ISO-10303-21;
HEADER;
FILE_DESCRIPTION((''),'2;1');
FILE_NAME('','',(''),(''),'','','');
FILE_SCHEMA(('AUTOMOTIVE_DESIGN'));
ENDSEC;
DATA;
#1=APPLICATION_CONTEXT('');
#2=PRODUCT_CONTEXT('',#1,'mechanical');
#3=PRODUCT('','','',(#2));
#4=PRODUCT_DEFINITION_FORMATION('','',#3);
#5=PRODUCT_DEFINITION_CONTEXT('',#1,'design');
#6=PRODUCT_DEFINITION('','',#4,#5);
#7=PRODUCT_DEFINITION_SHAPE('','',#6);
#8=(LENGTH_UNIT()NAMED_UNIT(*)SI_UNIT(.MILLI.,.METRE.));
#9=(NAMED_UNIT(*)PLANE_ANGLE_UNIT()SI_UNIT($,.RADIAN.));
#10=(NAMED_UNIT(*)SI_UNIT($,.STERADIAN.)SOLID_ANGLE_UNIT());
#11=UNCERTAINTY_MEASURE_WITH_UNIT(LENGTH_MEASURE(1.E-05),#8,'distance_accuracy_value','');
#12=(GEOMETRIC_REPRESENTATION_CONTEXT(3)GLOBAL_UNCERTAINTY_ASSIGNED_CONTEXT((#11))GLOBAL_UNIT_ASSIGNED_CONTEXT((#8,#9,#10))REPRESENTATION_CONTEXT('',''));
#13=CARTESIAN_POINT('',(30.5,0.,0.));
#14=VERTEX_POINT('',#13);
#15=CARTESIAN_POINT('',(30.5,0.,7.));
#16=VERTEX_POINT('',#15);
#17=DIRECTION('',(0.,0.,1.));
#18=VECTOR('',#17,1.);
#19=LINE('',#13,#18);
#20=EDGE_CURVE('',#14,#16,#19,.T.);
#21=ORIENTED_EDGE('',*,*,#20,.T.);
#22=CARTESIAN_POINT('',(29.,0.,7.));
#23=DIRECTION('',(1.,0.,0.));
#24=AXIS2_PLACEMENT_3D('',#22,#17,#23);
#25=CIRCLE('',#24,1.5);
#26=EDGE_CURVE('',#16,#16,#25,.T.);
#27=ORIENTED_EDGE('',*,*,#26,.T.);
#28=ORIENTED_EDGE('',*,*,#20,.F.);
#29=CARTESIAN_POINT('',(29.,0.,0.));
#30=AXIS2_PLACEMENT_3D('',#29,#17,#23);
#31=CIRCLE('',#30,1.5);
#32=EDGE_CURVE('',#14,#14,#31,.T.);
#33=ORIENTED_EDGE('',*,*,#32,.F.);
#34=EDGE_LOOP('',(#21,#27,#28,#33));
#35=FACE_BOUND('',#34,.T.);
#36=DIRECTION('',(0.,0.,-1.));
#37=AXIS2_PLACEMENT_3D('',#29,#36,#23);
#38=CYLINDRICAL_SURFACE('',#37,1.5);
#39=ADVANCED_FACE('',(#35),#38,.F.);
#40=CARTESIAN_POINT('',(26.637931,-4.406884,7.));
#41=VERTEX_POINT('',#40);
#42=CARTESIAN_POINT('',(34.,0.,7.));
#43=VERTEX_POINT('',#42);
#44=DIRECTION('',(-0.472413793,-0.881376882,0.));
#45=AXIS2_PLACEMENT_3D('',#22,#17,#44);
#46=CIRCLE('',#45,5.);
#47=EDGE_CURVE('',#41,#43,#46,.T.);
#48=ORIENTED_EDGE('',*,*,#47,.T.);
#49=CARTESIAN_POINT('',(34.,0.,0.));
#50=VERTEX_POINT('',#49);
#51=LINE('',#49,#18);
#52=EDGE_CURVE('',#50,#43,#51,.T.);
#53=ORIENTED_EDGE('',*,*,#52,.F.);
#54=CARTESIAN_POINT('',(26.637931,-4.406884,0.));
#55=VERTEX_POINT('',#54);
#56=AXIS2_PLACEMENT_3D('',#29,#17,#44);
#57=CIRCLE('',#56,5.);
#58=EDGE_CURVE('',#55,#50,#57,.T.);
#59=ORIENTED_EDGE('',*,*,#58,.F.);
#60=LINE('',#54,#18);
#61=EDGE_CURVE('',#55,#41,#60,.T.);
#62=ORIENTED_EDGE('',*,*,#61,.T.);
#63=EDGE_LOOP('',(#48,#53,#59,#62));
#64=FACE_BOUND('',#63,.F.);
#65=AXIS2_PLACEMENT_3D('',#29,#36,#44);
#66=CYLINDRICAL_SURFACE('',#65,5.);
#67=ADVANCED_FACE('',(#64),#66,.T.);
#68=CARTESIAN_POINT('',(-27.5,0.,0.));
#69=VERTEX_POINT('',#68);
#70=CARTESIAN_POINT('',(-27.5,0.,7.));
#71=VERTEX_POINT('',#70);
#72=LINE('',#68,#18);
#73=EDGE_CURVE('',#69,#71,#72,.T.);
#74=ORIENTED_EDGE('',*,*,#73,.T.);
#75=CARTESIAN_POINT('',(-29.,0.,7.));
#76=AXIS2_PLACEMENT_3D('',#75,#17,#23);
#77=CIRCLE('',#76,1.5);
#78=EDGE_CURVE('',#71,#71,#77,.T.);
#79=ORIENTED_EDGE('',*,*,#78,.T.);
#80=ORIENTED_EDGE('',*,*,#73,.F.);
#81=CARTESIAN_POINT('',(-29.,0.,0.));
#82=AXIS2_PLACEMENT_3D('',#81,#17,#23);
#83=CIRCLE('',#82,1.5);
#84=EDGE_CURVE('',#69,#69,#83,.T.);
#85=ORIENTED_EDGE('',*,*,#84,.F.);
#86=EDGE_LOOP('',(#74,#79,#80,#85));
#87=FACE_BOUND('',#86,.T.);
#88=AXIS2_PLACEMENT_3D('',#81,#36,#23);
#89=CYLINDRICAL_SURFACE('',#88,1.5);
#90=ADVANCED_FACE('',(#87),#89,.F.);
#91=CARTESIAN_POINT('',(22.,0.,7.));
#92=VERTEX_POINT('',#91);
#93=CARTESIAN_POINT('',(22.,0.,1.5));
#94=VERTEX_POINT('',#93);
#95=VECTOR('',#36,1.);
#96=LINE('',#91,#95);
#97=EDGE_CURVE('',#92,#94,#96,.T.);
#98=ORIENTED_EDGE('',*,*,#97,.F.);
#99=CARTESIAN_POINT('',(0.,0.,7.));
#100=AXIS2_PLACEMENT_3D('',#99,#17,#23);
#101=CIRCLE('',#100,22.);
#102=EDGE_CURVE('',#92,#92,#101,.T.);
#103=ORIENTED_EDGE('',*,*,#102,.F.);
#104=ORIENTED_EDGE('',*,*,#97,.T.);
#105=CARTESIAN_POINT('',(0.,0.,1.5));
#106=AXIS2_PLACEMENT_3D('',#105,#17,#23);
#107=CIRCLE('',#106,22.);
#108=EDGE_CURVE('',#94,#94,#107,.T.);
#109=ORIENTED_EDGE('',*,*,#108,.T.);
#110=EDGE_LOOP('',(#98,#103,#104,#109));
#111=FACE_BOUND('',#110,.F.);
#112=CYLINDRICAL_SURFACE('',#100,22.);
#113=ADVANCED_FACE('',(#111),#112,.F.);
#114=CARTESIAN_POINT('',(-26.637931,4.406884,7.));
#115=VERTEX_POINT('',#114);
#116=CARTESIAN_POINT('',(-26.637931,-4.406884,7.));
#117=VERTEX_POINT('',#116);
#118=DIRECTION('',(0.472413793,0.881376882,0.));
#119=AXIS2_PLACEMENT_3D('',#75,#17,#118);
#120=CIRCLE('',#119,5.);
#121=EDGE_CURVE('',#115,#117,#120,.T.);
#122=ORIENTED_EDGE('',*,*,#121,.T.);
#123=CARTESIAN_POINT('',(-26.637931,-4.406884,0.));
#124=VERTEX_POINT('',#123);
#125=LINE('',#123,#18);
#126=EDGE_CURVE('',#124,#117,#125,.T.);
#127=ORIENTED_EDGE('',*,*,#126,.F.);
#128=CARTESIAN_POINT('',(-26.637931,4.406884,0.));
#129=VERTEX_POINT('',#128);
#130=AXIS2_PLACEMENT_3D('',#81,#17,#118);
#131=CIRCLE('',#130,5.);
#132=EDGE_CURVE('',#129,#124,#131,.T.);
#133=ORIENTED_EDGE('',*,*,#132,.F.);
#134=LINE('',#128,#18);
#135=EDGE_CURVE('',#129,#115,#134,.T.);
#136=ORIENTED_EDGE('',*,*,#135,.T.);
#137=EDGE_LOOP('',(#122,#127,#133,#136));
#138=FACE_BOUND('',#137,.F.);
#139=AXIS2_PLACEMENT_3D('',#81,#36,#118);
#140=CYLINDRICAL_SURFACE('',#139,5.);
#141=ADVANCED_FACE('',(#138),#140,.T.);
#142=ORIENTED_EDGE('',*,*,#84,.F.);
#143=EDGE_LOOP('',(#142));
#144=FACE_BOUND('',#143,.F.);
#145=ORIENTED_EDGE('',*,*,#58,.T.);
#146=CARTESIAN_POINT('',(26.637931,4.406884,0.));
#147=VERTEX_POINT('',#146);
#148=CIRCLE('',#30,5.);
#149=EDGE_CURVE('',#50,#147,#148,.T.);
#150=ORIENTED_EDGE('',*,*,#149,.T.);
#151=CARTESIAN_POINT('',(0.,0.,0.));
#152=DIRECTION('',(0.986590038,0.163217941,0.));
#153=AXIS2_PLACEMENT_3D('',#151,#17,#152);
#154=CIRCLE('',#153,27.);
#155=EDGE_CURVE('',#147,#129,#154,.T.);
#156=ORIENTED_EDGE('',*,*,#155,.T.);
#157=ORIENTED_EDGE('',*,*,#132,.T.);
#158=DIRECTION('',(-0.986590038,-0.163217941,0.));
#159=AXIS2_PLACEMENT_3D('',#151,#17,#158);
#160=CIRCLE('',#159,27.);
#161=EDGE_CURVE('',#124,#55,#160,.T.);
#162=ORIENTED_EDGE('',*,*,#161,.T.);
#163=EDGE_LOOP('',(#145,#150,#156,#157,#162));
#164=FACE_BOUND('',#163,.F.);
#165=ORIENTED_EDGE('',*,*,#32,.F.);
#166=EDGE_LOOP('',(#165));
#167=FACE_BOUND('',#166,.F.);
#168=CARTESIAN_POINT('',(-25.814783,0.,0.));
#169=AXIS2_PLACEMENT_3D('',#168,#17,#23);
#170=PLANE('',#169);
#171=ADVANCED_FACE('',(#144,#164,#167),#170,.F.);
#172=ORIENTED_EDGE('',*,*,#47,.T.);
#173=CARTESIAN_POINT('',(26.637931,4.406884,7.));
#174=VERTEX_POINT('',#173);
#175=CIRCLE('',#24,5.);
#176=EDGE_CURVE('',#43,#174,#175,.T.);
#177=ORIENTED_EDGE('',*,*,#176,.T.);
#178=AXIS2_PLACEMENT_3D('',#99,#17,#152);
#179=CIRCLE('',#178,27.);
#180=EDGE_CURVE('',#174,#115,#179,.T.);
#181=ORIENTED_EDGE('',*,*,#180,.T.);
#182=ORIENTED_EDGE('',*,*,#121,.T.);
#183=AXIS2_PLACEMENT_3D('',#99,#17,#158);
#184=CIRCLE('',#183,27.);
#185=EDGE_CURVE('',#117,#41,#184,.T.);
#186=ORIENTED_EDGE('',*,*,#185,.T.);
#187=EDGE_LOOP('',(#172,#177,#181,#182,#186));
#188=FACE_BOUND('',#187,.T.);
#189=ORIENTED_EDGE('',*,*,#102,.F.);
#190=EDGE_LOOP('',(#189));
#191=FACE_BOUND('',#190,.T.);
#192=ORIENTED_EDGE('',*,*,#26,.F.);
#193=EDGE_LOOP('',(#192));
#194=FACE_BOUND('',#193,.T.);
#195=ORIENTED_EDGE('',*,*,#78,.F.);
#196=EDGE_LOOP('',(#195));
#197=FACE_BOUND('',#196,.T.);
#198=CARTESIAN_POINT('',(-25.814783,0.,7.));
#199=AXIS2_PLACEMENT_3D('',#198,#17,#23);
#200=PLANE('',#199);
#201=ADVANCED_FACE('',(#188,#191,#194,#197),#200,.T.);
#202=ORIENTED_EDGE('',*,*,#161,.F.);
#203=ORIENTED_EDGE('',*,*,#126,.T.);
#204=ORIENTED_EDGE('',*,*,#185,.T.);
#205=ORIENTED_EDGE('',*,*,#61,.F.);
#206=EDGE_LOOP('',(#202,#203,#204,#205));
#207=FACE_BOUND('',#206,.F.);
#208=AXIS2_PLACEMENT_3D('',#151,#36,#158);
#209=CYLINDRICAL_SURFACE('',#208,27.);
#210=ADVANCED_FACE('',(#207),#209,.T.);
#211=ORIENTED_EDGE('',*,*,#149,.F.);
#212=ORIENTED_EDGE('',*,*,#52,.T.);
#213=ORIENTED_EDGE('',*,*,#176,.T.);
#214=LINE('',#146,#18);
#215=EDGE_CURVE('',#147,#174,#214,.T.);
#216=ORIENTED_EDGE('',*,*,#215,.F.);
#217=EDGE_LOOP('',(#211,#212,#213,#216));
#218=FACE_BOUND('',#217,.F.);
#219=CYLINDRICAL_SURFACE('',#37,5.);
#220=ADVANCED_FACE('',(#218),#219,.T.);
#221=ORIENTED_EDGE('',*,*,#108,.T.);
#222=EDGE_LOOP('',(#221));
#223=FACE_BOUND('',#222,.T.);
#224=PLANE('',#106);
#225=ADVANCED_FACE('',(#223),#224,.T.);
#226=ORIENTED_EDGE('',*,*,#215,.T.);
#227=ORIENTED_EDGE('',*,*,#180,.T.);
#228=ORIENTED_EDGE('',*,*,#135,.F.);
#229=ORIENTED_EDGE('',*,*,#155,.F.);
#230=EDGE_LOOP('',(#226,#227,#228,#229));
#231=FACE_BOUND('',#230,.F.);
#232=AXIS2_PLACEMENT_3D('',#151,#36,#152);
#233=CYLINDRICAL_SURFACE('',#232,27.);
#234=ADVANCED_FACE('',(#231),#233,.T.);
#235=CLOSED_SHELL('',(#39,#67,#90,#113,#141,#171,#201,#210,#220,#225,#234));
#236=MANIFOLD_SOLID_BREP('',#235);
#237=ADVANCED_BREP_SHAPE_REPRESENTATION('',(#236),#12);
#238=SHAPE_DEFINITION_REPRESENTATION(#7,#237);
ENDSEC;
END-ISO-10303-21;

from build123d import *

# Parameters (mm, degrees)
F0_R     = 1.5
F1_DEPTH = 7
F2_DEPTH = 7
F3_R     = 22
F4_DEPTH = 5.5


with BuildPart() as f1:
    # F0 (on Top) → F1 (new body)
    with BuildSketch(Plane.XY):
        with BuildLine():
            ThreePointArc((-26.6379310345, -4.4068844099), (-27, 0), (-26.6379310345, 4.4068844099))
            ThreePointArc((-26.6379310345, 4.4068844099), (-34, 0), (-26.6379310345, -4.4068844099))
        make_face()
        with Locations((-29, 0)):
            Circle(F0_R, mode=Mode.SUBTRACT)
    extrude(amount=F1_DEPTH)



with BuildPart() as f1b:
    # F0 (on Top) → F1, piece 2 (new body)
    with BuildSketch(Plane.XY):
        with BuildLine():
            ThreePointArc((26.6379310345, 4.4068844099), (26.9093305187, 2.21086658), (27, 0))
            ThreePointArc((27, 0), (26.9093305187, -2.21086658), (26.6379310345, -4.4068844099))
            ThreePointArc((26.6379310345, -4.4068844099), (31.5680396388, -4.2901249881), (34, 0))
            ThreePointArc((34, 0), (31.5680396388, 4.2901249881), (26.6379310345, 4.4068844099))
        make_face()
        with Locations((29, 0)):
            Circle(F0_R, mode=Mode.SUBTRACT)
    extrude(amount=F1_DEPTH)


with BuildPart() as f1_1:
    add(f1.part)

    add(f1b.part)  # F2 merges F1b
    # F0 (on Top) → F2 (join)
    with BuildSketch(Plane.XY):
        with BuildLine():
            ThreePointArc((-24, 0), (-24.7098750119, 2.5680396388), (-26.6379310345, 4.4068844099))
            ThreePointArc((-26.6379310345, 4.4068844099), (-27, 0), (-26.6379310345, -4.4068844099))
            ThreePointArc((-26.6379310345, -4.4068844099), (-24.7098750119, -2.5680396388), (-24, 0))
        make_face()
        with BuildLine():
            ThreePointArc((26.6379310345, -4.4068844099), (26.9093305187, -2.21086658), (27, 0))
            ThreePointArc((27, 0), (26.9093305187, 2.21086658), (26.6379310345, 4.4068844099))
            ThreePointArc((26.6379310345, 4.4068844099), (24, 0), (26.6379310345, -4.4068844099))
        make_face()
        with BuildLine():
            ThreePointArc((26.6379310345, -4.4068844099), (24, 0), (26.6379310345, 4.4068844099))
            ThreePointArc((26.6379310345, 4.4068844099), (0, 27), (-26.6379310345, 4.4068844099))
            ThreePointArc((-26.6379310345, 4.4068844099), (-24.7098750119, 2.5680396388), (-24, 0))
            ThreePointArc((-24, 0), (-24.7098750119, -2.5680396388), (-26.6379310345, -4.4068844099))
            ThreePointArc((-26.6379310345, -4.4068844099), (0, -27), (26.6379310345, -4.4068844099))
        make_face()
    extrude(amount=F2_DEPTH)

    # F3 (on face) → F4 (cut)
    with BuildSketch(Plane.XY.offset(7)):
        Circle(F3_R)
    extrude(amount=-F4_DEPTH, mode=Mode.SUBTRACT)


solid = f1_1.part
